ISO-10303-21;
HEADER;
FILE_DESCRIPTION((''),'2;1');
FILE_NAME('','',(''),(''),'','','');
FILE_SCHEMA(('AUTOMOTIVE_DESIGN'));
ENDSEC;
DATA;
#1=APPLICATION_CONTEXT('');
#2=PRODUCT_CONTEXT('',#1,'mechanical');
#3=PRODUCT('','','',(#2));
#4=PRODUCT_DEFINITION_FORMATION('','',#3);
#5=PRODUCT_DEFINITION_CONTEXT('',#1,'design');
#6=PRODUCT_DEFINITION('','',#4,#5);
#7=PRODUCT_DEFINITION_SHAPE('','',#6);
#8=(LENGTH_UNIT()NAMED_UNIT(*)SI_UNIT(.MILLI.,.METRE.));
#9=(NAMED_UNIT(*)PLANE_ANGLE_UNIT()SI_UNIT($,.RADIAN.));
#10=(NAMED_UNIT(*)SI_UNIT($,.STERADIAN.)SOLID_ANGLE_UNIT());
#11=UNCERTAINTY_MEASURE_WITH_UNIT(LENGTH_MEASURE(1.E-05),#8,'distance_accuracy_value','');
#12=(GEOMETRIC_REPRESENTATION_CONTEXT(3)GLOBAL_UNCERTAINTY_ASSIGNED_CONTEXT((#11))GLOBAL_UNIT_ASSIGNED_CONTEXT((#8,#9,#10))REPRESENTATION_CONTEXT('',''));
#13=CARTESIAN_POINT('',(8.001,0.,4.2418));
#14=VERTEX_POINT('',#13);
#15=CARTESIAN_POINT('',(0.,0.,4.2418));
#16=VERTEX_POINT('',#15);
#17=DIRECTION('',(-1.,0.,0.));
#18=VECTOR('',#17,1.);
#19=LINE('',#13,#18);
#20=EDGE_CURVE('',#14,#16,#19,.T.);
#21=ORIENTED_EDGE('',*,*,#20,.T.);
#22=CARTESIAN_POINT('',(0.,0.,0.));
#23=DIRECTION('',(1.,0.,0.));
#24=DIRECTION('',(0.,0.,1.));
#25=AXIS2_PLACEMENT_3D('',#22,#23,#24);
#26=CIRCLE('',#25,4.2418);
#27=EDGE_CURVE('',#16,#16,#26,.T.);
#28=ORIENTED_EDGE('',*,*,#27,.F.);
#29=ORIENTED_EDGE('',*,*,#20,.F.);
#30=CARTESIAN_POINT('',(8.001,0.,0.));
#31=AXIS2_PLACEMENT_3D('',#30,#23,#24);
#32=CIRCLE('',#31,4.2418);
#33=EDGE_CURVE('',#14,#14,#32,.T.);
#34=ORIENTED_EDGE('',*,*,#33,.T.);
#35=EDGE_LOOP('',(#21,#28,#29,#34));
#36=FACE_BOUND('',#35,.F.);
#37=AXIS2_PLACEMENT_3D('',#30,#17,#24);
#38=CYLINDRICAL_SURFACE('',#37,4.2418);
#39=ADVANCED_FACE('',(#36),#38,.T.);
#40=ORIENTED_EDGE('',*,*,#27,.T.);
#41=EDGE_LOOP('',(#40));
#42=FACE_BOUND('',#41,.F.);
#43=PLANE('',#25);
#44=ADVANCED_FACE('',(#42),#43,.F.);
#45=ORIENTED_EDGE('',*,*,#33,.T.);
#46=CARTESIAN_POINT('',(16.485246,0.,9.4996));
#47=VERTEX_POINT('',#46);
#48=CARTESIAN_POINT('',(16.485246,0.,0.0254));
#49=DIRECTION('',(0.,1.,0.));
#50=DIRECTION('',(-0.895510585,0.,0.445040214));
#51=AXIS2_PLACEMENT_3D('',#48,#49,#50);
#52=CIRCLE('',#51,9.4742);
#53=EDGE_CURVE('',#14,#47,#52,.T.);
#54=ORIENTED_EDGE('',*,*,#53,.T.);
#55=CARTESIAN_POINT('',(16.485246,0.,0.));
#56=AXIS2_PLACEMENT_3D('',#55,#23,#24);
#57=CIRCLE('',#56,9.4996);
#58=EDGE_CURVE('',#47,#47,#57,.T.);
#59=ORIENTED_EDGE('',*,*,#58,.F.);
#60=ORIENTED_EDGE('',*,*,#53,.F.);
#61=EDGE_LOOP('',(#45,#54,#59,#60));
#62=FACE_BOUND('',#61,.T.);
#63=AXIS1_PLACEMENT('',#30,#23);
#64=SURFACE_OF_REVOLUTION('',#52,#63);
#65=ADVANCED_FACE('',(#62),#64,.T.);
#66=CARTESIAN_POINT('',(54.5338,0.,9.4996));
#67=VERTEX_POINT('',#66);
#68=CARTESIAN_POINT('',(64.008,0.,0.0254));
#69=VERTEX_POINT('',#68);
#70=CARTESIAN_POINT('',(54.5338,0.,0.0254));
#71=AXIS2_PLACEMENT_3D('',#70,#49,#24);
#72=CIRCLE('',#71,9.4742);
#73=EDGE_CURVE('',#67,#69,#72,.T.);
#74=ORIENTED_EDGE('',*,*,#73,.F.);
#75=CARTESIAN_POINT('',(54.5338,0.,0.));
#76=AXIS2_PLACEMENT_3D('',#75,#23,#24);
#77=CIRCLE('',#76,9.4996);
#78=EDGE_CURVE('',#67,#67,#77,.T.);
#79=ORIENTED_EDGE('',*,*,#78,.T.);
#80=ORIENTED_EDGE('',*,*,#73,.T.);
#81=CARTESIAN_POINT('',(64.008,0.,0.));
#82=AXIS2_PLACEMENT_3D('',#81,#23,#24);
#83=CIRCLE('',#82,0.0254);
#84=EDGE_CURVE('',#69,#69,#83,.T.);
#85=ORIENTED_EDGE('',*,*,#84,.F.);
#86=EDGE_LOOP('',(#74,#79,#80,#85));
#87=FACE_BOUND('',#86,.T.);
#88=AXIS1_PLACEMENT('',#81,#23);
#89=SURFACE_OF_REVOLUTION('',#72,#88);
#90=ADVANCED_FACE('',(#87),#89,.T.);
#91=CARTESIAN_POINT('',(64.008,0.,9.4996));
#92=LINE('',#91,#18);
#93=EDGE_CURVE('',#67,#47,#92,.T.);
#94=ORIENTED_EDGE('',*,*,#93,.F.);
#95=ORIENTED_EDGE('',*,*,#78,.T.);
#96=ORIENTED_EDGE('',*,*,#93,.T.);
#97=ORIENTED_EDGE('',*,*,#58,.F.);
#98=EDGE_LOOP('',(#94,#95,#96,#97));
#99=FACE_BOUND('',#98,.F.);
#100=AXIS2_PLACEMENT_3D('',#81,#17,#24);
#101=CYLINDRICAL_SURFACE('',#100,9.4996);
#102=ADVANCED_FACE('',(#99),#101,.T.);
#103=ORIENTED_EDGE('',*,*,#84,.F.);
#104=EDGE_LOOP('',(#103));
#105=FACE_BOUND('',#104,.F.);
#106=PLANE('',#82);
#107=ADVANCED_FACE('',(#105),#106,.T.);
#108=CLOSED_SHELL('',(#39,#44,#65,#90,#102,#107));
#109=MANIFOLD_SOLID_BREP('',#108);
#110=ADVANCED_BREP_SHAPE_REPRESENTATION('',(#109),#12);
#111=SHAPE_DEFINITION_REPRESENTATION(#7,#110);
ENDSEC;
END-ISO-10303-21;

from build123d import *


# Not quite as in the source:
# - a fillet or chamfer that OpenCascade refuses, or shapes differently, is made with other operations: its cross-section is extruded or revolved along the edge and cut away or added


with BuildPart() as f1:
    # F0 (on Front) → F1 (revolve)
    with BuildSketch(Plane.XZ):
        Polygon((0, 4.2418), (0, 0), (64.008, 0), (64.008, 9.4996), (56.007, 9.4996), (36.0045, 9.4996), (16.002, 9.4996), (8.001, 9.4996), (8.001, 4.2418), align=None)
    revolve(axis=Axis((32.004, 0, 0), (1, 0, 0)))

    # F2: fillet of radius 9.4742 on 3 edges, made by hand

    # F2_s1 → F2_t2 (revolve, cut)
    with BuildSketch(Plane.XZ):
        with BuildLine():
            ThreePointArc((54.5338, 9.4996), (61.2330710663, 6.7246710663), (64.008, 0.0254))
            Line((64.008, 0.0254), (64.008, 9.4996))
            Line((64.008, 9.4996), (54.5338, 9.4996))
        make_face()
    revolve(axis=Axis((64.008, 0, 0), (1, 0, 0)), mode=Mode.SUBTRACT)

    # F2_s3 → F2_t4 (revolve, cut)
    with BuildSketch(Plane.XZ):
        with BuildLine():
            ThreePointArc((8.001, 4.2418), (11.4945826612, 8.078582058), (16.4852463826, 9.4996))
            Line((16.4852463826, 9.4996), (8.001, 9.4996))
            Line((8.001, 9.4996), (8.001, 4.2418))
        make_face()
    revolve(axis=Axis((8.001, 0, 0), (1, 0, 0)), mode=Mode.SUBTRACT)


solid = f1.part
